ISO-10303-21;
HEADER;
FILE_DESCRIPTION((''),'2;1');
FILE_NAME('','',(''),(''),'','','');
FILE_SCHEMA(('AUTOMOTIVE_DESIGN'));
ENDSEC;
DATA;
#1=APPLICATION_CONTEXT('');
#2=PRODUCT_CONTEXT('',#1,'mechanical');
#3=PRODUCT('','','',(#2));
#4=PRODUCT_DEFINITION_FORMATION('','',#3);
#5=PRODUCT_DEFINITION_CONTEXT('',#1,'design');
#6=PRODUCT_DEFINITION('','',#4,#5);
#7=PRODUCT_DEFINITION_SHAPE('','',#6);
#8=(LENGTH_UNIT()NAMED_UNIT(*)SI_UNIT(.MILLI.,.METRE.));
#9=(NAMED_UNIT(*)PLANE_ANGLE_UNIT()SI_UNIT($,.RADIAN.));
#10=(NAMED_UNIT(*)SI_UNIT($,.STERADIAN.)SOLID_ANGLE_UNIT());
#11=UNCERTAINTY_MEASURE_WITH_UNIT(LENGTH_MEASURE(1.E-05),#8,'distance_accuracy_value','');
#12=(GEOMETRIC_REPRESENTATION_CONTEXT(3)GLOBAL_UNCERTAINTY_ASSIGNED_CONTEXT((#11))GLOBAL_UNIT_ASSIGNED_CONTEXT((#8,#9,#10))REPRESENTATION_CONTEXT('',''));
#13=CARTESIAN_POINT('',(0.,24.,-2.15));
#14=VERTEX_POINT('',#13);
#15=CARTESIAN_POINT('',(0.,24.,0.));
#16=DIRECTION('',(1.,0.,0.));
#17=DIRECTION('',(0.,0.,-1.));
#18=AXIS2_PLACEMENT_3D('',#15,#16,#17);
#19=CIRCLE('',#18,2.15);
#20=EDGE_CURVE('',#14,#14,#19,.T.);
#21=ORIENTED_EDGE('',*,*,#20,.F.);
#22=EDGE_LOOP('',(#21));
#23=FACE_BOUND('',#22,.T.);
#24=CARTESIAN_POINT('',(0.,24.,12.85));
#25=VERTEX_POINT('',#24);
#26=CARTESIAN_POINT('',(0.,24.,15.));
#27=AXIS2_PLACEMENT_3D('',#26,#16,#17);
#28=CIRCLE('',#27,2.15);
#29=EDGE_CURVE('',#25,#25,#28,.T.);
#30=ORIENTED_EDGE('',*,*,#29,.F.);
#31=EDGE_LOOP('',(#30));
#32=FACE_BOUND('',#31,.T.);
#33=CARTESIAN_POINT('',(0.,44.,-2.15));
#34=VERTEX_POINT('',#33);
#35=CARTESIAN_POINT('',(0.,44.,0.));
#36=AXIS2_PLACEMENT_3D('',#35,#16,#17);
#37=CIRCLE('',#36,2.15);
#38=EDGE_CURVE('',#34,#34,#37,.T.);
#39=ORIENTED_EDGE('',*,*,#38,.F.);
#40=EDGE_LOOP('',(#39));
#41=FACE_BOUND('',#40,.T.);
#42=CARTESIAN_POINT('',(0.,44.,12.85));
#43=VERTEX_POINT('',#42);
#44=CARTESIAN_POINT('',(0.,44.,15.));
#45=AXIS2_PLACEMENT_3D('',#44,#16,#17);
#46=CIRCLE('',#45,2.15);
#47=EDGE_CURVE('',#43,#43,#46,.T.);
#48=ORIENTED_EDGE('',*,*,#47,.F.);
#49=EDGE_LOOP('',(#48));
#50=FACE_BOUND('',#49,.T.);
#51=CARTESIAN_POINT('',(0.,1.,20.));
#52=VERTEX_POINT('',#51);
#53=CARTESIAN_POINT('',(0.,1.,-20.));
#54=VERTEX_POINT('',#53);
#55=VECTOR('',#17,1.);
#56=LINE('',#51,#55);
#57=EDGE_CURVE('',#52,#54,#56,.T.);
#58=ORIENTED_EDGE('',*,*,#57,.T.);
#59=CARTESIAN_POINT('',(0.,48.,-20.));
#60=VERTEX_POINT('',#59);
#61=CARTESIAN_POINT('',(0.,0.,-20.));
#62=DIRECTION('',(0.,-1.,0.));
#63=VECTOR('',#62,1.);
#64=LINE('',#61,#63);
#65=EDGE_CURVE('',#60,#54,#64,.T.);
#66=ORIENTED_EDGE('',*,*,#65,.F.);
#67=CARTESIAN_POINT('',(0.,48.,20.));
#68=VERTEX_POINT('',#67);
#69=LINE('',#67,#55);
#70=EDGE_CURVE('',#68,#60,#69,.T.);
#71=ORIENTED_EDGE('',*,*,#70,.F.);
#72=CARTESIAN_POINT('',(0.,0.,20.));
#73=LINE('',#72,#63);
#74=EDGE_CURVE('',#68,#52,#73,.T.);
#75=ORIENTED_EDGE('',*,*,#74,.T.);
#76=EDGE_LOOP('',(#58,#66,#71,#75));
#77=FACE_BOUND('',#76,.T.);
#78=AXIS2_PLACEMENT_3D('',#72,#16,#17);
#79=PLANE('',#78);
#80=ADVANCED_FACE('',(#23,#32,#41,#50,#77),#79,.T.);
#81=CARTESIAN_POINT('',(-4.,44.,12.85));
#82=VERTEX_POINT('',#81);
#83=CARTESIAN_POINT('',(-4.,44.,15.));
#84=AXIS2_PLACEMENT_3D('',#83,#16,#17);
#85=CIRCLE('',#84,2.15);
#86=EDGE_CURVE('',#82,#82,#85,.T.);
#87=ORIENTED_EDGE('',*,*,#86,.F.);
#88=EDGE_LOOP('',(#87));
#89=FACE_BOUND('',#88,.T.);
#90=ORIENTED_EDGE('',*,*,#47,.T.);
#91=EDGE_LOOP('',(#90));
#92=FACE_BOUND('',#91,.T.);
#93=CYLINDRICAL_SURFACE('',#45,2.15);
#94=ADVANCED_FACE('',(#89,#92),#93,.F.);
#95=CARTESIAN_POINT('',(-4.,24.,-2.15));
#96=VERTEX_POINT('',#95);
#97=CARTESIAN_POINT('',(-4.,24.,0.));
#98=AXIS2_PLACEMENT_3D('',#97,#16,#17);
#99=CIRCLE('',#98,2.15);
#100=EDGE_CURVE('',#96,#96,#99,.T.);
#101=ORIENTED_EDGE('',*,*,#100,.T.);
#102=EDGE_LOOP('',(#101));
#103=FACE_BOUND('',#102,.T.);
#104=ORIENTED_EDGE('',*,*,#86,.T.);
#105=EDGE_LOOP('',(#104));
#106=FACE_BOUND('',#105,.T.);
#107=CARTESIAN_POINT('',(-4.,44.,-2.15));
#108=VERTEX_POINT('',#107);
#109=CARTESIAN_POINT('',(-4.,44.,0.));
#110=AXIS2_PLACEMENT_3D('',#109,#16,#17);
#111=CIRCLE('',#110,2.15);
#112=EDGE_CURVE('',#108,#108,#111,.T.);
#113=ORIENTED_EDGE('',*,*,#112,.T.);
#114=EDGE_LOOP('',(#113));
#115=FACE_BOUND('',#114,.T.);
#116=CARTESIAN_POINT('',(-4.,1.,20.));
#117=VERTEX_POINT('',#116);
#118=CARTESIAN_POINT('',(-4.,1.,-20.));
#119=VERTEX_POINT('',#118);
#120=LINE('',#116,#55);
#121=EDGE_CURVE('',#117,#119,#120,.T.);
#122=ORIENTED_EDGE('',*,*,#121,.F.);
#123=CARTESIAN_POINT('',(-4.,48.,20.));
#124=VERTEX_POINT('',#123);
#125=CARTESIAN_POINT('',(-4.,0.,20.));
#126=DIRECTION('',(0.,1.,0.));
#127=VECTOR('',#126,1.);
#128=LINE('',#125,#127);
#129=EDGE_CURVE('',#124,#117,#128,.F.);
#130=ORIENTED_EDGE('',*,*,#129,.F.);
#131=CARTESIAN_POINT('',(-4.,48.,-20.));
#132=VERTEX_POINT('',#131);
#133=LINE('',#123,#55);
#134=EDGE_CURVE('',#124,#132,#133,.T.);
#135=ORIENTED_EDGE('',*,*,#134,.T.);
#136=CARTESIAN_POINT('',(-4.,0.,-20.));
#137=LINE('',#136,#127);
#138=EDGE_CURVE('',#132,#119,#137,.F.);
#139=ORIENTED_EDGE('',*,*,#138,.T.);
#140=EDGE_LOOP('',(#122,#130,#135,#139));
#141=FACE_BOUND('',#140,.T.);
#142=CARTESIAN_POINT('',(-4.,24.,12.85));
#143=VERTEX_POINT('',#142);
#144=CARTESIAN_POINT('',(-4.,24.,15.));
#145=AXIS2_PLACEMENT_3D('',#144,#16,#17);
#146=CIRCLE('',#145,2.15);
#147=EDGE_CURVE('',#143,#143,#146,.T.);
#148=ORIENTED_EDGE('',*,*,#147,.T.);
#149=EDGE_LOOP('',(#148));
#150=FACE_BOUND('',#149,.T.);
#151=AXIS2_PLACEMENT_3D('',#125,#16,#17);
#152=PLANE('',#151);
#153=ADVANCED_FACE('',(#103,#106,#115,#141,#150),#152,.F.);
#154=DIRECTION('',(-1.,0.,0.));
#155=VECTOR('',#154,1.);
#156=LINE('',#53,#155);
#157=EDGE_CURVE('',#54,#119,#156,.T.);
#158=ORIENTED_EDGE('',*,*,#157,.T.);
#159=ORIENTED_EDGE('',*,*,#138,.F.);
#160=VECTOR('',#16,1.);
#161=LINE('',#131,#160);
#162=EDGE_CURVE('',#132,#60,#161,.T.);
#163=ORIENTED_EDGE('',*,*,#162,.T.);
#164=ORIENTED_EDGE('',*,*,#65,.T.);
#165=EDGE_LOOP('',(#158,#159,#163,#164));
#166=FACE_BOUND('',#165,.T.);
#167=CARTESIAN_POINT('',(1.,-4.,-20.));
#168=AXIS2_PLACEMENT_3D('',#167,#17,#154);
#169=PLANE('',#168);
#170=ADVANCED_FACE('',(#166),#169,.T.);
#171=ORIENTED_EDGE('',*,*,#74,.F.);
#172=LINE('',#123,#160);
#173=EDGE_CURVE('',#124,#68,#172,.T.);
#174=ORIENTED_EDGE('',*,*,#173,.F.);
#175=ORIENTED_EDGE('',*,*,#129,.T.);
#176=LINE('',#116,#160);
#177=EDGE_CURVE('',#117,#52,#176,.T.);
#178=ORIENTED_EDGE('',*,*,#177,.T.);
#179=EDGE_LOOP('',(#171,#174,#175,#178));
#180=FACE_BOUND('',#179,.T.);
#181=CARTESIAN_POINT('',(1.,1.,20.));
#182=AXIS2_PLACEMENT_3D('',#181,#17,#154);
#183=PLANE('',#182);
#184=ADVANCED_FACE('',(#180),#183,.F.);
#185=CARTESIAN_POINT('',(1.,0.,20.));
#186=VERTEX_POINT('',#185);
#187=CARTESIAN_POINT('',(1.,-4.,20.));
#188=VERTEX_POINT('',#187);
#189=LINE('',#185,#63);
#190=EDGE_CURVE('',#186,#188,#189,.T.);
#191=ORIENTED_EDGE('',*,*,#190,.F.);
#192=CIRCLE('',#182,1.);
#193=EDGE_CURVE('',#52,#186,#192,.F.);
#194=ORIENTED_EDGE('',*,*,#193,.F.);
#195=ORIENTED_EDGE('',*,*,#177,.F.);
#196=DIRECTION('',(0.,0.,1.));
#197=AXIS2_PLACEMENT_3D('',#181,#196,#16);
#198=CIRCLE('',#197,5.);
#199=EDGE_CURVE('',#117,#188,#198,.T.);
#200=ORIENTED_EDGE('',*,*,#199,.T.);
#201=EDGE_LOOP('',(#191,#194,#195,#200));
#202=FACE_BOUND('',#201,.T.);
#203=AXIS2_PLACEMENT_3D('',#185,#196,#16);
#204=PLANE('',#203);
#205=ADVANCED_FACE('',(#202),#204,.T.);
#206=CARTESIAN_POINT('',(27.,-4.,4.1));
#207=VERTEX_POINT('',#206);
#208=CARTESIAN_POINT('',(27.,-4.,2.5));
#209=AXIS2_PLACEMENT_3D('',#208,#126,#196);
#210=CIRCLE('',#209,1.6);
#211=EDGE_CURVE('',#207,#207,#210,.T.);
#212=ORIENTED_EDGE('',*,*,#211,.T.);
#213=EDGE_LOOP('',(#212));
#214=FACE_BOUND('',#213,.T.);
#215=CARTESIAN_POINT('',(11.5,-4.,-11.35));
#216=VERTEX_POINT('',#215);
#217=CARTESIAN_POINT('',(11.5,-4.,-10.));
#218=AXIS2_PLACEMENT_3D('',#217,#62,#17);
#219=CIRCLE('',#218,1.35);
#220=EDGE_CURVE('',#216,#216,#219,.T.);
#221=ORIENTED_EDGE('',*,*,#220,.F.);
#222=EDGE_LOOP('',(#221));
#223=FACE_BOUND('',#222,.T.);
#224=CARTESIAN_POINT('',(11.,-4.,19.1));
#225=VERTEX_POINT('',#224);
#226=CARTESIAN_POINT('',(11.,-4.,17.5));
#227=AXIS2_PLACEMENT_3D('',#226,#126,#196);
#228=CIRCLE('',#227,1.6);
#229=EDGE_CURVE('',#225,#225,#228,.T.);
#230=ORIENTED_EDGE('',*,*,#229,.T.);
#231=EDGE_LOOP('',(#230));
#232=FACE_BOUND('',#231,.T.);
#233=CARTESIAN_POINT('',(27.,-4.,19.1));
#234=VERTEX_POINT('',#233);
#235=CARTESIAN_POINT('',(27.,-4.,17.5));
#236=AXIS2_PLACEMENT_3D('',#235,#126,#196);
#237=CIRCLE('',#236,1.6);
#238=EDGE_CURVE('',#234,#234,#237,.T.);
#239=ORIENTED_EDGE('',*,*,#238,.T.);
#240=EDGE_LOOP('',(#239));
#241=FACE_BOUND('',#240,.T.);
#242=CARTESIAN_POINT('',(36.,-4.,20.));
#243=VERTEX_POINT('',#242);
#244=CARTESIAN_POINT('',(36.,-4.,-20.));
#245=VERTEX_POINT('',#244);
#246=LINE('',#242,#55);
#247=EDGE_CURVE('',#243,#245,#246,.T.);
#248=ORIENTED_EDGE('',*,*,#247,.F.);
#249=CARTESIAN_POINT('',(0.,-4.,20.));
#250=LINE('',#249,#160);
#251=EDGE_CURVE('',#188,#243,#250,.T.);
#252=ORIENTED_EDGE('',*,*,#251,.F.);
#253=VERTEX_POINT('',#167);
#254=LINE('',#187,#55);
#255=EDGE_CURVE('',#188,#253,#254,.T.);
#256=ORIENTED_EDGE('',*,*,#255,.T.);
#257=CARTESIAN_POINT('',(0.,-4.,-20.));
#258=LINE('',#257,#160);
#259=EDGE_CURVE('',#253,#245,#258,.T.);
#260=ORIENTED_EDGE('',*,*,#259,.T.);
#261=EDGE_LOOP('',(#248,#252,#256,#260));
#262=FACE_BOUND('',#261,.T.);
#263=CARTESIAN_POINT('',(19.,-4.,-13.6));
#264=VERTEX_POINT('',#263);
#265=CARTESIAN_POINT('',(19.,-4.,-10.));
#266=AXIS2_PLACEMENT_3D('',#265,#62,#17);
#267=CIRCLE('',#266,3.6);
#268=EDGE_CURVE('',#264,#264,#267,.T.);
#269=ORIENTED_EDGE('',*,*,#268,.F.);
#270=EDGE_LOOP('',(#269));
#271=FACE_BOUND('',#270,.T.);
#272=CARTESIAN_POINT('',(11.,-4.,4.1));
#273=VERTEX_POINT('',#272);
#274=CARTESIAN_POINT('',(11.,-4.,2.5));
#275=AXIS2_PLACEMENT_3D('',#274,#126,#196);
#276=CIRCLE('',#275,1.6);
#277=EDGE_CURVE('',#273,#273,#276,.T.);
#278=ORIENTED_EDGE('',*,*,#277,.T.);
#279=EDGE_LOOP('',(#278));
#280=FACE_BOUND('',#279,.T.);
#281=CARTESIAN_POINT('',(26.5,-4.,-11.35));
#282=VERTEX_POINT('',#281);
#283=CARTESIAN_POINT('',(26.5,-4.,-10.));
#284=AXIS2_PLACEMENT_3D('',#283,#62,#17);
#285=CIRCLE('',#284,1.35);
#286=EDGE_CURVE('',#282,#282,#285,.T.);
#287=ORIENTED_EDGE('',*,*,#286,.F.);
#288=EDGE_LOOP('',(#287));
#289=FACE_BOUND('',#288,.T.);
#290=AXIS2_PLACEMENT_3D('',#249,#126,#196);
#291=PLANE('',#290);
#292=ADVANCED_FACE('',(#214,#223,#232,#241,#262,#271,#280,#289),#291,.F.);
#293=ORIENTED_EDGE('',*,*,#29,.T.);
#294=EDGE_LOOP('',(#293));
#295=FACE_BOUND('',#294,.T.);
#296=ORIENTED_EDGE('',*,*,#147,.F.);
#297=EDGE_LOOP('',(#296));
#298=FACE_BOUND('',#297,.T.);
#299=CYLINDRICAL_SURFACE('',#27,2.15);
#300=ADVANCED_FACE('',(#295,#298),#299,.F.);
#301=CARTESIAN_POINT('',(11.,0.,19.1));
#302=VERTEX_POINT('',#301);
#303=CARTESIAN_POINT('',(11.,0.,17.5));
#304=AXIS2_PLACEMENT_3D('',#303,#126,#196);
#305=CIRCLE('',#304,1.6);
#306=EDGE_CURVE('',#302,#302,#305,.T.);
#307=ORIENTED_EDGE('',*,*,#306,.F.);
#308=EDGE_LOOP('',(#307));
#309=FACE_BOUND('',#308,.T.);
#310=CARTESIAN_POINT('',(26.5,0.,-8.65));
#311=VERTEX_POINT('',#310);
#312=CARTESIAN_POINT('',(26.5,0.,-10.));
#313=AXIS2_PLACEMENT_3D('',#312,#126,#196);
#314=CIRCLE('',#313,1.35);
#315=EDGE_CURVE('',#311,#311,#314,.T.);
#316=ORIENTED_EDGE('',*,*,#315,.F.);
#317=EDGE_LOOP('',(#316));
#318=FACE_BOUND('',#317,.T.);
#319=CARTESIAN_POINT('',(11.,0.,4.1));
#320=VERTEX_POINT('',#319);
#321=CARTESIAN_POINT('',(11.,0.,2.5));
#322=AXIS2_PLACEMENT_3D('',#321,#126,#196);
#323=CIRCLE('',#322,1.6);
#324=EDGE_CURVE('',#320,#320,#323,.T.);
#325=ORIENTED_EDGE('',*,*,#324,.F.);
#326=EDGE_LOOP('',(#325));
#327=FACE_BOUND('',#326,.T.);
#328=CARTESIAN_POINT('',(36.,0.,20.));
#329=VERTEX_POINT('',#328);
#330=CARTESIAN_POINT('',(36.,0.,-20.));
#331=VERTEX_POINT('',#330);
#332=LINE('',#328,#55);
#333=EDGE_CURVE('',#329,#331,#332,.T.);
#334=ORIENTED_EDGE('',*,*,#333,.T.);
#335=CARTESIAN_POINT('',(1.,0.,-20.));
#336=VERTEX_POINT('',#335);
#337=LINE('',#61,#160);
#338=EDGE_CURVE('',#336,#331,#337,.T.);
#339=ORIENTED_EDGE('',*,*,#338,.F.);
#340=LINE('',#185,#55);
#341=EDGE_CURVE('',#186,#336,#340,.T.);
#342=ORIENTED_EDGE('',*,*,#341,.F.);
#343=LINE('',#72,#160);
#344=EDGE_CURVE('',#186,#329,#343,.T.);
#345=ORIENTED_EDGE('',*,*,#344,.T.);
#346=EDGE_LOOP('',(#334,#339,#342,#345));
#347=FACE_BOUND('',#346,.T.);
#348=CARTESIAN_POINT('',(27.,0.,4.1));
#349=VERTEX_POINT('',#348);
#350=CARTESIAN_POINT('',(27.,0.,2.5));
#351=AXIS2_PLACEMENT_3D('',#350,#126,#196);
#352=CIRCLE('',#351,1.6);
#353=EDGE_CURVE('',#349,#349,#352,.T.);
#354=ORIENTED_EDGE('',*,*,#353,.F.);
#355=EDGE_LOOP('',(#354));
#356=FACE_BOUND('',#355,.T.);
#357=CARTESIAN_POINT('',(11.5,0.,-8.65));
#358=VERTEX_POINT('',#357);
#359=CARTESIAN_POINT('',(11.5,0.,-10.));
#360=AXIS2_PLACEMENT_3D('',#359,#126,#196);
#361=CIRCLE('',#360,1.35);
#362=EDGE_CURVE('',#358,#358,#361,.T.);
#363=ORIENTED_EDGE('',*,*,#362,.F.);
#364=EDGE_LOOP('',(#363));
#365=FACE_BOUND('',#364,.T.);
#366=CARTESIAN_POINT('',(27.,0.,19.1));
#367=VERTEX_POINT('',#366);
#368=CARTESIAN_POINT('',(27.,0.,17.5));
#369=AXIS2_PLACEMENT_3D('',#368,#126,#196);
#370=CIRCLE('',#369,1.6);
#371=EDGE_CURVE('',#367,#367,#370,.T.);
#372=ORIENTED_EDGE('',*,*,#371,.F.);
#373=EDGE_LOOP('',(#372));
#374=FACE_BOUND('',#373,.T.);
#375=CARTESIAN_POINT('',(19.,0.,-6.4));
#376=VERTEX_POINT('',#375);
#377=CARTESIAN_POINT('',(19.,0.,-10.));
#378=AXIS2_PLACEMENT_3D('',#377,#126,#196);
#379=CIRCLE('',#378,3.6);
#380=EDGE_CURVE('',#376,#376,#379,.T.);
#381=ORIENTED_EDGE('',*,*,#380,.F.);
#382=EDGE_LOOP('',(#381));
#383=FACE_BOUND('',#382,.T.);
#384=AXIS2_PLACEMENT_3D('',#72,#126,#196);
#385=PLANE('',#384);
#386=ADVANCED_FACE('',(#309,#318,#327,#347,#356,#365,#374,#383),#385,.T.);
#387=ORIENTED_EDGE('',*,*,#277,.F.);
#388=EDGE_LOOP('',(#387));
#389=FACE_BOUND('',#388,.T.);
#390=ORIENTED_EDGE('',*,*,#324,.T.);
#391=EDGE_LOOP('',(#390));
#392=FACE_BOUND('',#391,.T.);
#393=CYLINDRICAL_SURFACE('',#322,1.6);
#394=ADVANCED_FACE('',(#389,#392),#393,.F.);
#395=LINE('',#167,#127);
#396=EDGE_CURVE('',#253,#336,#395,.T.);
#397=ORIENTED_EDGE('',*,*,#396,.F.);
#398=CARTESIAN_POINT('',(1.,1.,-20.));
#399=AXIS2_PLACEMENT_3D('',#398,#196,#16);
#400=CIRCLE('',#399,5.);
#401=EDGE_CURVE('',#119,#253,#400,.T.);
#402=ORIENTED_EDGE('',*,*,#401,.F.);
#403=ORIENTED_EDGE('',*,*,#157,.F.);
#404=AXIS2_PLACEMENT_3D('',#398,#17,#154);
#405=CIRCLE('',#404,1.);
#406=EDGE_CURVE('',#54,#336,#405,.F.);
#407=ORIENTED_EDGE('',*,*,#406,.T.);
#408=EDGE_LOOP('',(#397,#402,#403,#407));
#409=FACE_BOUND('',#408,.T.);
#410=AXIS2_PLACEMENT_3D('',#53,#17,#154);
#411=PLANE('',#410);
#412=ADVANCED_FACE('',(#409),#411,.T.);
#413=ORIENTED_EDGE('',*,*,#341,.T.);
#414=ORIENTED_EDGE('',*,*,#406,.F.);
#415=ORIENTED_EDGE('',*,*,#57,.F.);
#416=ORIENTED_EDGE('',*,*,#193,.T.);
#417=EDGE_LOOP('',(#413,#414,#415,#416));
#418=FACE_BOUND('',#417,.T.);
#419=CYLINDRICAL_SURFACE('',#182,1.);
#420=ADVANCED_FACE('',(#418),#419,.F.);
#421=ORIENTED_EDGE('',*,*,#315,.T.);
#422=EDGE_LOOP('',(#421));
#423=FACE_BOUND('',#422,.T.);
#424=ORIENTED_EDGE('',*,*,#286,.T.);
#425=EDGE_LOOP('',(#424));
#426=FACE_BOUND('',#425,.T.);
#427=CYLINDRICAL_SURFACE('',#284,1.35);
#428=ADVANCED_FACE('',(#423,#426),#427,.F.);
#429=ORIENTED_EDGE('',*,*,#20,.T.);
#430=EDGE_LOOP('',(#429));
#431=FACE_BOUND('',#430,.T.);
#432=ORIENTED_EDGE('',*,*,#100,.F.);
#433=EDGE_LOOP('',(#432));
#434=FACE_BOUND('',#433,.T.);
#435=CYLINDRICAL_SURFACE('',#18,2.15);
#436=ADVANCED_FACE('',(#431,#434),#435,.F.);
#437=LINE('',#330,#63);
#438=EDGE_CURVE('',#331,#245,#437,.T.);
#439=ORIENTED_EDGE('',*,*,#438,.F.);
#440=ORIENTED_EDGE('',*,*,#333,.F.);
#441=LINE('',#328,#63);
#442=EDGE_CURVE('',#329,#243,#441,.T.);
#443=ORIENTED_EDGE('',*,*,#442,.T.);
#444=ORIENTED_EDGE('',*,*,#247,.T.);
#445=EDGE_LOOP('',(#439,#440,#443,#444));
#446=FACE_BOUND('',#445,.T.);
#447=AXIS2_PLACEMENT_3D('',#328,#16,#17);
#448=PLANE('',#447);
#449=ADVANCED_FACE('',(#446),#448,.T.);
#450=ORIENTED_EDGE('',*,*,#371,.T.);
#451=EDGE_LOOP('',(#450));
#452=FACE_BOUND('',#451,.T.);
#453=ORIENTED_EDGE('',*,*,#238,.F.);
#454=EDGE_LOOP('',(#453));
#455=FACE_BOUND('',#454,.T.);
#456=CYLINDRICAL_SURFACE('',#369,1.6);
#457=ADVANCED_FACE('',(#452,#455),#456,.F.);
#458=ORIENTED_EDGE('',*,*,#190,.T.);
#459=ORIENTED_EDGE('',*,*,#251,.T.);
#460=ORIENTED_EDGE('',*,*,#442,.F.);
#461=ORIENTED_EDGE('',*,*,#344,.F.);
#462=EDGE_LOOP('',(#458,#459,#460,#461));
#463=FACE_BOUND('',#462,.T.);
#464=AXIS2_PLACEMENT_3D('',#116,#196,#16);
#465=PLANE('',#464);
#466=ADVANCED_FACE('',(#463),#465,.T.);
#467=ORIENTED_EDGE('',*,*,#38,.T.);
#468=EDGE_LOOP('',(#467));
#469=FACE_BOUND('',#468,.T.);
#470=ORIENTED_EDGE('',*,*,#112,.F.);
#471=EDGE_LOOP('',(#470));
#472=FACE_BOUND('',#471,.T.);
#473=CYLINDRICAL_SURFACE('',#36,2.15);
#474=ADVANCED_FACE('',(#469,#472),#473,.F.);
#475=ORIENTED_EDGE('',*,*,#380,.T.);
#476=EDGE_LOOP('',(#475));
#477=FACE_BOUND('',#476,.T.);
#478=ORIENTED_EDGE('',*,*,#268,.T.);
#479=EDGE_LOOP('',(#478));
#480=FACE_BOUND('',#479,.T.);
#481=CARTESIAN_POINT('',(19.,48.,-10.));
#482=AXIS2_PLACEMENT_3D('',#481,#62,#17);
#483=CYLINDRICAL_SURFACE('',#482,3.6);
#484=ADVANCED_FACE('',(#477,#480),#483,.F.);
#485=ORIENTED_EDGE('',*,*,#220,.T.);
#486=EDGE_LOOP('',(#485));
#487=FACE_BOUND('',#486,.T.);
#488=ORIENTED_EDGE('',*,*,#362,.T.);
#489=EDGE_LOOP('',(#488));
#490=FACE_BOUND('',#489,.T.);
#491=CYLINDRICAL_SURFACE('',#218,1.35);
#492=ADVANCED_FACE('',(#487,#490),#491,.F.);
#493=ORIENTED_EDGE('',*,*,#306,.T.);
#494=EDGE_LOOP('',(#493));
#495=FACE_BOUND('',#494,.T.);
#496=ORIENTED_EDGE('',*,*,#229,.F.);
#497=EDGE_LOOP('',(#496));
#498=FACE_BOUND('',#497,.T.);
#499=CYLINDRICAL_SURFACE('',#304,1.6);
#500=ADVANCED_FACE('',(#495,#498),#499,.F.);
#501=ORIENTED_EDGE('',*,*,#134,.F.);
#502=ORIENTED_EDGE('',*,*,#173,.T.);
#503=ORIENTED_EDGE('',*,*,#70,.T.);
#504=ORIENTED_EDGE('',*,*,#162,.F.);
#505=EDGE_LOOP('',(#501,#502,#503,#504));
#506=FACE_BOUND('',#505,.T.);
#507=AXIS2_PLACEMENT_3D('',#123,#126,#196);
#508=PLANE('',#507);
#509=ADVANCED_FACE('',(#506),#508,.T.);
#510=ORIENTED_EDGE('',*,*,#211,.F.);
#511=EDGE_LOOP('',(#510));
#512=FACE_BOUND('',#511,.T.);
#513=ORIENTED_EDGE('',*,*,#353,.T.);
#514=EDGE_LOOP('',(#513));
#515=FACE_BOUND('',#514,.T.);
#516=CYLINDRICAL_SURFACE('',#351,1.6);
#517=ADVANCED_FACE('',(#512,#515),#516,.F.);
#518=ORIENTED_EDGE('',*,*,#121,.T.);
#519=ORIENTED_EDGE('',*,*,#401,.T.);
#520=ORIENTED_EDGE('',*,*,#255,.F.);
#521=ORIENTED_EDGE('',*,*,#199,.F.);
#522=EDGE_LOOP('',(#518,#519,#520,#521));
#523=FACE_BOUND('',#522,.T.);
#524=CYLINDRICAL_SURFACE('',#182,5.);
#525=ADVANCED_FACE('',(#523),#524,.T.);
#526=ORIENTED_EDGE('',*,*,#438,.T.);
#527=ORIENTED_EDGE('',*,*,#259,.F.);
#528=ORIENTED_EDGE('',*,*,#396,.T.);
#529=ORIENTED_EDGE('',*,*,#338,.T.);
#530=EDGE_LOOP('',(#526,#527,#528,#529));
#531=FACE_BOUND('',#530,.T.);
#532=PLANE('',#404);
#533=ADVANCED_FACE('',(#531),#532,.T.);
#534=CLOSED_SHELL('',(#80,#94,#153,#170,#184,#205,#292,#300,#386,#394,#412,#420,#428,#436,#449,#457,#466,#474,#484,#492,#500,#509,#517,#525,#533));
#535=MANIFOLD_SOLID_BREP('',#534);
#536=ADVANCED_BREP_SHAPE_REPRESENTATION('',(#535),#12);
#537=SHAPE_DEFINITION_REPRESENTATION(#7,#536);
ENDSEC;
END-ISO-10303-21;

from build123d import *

# Parameters (mm, degrees)
SM_BASE_FLANGE_2_DEPTH = 20
HOLE_WIZARD_M3_1_D     = 3.2
SKETCH_24_R            = 3.6
CUT_EXTRUDE_2_DEPTH    = 67.332495807
HOLE_WIZARD_M4_1_D     = 4.3
HOLE_WIZARD_M2_5_1_D   = 2.7


# Sheet-metal steps are written as plain solids
with BuildPart() as part:
    # 草圖16 → 基材-凸緣2 (new, symmetric)
    with BuildSketch(Plane.XY):
        with BuildLine():
            Line((36, 0), (1, 0))
            ThreePointArc((1, 0), (0.292893219, 0.292893219), (0, 1))
            Line((0, 1), (0, 48))
            Line((0, 48), (-4, 48))
            Line((-4, 48), (-4, 1))
            ThreePointArc((-4, 1), (-2.535533906, -2.535533906), (1, -4))
            Line((1, -4), (36, -4))
            Line((36, -4), (36, 0))
        make_face()
    extrude(amount=SM_BASE_FLANGE_2_DEPTH, both=True)

    # M3 餘隙孔1 (through all)
    with Locations(Plane(origin=(0, 0, 0), x_dir=(-1, 0, 0), z_dir=(0, 1, 0))):
        with Locations((-27, 17.5), (-11, 2.5), (-11, 17.5), (-27, 2.5)):
            Hole(HOLE_WIZARD_M3_1_D / 2)

    # 草圖24 → 除料-伸長2 (cut, through all)
    with BuildSketch(Plane.XZ.offset(4)):
        with Locations(Location((19, -10, 0), (0, 0, 270))):
            Circle(SKETCH_24_R)
    extrude(amount=-CUT_EXTRUDE_2_DEPTH, mode=Mode.SUBTRACT)

    # M4 餘隙孔1 (through all)
    with Locations(Plane(origin=(0, 0, 0), x_dir=(0, 0, 1), z_dir=(1, 0, 0))):
        with Locations((0, -44), (15, -44), (15, -24), (0, -24)):
            Hole(HOLE_WIZARD_M4_1_D / 2)

    # M2.5 餘隙孔1 (through all)
    with Locations(Plane(origin=(0, -4, 0), x_dir=(-1, 0, 0), z_dir=(0, -1, 0))):
        with Locations((-11.5, 10), (-26.5, 10)):
            Hole(HOLE_WIZARD_M2_5_1_D / 2)


solid = part.part
